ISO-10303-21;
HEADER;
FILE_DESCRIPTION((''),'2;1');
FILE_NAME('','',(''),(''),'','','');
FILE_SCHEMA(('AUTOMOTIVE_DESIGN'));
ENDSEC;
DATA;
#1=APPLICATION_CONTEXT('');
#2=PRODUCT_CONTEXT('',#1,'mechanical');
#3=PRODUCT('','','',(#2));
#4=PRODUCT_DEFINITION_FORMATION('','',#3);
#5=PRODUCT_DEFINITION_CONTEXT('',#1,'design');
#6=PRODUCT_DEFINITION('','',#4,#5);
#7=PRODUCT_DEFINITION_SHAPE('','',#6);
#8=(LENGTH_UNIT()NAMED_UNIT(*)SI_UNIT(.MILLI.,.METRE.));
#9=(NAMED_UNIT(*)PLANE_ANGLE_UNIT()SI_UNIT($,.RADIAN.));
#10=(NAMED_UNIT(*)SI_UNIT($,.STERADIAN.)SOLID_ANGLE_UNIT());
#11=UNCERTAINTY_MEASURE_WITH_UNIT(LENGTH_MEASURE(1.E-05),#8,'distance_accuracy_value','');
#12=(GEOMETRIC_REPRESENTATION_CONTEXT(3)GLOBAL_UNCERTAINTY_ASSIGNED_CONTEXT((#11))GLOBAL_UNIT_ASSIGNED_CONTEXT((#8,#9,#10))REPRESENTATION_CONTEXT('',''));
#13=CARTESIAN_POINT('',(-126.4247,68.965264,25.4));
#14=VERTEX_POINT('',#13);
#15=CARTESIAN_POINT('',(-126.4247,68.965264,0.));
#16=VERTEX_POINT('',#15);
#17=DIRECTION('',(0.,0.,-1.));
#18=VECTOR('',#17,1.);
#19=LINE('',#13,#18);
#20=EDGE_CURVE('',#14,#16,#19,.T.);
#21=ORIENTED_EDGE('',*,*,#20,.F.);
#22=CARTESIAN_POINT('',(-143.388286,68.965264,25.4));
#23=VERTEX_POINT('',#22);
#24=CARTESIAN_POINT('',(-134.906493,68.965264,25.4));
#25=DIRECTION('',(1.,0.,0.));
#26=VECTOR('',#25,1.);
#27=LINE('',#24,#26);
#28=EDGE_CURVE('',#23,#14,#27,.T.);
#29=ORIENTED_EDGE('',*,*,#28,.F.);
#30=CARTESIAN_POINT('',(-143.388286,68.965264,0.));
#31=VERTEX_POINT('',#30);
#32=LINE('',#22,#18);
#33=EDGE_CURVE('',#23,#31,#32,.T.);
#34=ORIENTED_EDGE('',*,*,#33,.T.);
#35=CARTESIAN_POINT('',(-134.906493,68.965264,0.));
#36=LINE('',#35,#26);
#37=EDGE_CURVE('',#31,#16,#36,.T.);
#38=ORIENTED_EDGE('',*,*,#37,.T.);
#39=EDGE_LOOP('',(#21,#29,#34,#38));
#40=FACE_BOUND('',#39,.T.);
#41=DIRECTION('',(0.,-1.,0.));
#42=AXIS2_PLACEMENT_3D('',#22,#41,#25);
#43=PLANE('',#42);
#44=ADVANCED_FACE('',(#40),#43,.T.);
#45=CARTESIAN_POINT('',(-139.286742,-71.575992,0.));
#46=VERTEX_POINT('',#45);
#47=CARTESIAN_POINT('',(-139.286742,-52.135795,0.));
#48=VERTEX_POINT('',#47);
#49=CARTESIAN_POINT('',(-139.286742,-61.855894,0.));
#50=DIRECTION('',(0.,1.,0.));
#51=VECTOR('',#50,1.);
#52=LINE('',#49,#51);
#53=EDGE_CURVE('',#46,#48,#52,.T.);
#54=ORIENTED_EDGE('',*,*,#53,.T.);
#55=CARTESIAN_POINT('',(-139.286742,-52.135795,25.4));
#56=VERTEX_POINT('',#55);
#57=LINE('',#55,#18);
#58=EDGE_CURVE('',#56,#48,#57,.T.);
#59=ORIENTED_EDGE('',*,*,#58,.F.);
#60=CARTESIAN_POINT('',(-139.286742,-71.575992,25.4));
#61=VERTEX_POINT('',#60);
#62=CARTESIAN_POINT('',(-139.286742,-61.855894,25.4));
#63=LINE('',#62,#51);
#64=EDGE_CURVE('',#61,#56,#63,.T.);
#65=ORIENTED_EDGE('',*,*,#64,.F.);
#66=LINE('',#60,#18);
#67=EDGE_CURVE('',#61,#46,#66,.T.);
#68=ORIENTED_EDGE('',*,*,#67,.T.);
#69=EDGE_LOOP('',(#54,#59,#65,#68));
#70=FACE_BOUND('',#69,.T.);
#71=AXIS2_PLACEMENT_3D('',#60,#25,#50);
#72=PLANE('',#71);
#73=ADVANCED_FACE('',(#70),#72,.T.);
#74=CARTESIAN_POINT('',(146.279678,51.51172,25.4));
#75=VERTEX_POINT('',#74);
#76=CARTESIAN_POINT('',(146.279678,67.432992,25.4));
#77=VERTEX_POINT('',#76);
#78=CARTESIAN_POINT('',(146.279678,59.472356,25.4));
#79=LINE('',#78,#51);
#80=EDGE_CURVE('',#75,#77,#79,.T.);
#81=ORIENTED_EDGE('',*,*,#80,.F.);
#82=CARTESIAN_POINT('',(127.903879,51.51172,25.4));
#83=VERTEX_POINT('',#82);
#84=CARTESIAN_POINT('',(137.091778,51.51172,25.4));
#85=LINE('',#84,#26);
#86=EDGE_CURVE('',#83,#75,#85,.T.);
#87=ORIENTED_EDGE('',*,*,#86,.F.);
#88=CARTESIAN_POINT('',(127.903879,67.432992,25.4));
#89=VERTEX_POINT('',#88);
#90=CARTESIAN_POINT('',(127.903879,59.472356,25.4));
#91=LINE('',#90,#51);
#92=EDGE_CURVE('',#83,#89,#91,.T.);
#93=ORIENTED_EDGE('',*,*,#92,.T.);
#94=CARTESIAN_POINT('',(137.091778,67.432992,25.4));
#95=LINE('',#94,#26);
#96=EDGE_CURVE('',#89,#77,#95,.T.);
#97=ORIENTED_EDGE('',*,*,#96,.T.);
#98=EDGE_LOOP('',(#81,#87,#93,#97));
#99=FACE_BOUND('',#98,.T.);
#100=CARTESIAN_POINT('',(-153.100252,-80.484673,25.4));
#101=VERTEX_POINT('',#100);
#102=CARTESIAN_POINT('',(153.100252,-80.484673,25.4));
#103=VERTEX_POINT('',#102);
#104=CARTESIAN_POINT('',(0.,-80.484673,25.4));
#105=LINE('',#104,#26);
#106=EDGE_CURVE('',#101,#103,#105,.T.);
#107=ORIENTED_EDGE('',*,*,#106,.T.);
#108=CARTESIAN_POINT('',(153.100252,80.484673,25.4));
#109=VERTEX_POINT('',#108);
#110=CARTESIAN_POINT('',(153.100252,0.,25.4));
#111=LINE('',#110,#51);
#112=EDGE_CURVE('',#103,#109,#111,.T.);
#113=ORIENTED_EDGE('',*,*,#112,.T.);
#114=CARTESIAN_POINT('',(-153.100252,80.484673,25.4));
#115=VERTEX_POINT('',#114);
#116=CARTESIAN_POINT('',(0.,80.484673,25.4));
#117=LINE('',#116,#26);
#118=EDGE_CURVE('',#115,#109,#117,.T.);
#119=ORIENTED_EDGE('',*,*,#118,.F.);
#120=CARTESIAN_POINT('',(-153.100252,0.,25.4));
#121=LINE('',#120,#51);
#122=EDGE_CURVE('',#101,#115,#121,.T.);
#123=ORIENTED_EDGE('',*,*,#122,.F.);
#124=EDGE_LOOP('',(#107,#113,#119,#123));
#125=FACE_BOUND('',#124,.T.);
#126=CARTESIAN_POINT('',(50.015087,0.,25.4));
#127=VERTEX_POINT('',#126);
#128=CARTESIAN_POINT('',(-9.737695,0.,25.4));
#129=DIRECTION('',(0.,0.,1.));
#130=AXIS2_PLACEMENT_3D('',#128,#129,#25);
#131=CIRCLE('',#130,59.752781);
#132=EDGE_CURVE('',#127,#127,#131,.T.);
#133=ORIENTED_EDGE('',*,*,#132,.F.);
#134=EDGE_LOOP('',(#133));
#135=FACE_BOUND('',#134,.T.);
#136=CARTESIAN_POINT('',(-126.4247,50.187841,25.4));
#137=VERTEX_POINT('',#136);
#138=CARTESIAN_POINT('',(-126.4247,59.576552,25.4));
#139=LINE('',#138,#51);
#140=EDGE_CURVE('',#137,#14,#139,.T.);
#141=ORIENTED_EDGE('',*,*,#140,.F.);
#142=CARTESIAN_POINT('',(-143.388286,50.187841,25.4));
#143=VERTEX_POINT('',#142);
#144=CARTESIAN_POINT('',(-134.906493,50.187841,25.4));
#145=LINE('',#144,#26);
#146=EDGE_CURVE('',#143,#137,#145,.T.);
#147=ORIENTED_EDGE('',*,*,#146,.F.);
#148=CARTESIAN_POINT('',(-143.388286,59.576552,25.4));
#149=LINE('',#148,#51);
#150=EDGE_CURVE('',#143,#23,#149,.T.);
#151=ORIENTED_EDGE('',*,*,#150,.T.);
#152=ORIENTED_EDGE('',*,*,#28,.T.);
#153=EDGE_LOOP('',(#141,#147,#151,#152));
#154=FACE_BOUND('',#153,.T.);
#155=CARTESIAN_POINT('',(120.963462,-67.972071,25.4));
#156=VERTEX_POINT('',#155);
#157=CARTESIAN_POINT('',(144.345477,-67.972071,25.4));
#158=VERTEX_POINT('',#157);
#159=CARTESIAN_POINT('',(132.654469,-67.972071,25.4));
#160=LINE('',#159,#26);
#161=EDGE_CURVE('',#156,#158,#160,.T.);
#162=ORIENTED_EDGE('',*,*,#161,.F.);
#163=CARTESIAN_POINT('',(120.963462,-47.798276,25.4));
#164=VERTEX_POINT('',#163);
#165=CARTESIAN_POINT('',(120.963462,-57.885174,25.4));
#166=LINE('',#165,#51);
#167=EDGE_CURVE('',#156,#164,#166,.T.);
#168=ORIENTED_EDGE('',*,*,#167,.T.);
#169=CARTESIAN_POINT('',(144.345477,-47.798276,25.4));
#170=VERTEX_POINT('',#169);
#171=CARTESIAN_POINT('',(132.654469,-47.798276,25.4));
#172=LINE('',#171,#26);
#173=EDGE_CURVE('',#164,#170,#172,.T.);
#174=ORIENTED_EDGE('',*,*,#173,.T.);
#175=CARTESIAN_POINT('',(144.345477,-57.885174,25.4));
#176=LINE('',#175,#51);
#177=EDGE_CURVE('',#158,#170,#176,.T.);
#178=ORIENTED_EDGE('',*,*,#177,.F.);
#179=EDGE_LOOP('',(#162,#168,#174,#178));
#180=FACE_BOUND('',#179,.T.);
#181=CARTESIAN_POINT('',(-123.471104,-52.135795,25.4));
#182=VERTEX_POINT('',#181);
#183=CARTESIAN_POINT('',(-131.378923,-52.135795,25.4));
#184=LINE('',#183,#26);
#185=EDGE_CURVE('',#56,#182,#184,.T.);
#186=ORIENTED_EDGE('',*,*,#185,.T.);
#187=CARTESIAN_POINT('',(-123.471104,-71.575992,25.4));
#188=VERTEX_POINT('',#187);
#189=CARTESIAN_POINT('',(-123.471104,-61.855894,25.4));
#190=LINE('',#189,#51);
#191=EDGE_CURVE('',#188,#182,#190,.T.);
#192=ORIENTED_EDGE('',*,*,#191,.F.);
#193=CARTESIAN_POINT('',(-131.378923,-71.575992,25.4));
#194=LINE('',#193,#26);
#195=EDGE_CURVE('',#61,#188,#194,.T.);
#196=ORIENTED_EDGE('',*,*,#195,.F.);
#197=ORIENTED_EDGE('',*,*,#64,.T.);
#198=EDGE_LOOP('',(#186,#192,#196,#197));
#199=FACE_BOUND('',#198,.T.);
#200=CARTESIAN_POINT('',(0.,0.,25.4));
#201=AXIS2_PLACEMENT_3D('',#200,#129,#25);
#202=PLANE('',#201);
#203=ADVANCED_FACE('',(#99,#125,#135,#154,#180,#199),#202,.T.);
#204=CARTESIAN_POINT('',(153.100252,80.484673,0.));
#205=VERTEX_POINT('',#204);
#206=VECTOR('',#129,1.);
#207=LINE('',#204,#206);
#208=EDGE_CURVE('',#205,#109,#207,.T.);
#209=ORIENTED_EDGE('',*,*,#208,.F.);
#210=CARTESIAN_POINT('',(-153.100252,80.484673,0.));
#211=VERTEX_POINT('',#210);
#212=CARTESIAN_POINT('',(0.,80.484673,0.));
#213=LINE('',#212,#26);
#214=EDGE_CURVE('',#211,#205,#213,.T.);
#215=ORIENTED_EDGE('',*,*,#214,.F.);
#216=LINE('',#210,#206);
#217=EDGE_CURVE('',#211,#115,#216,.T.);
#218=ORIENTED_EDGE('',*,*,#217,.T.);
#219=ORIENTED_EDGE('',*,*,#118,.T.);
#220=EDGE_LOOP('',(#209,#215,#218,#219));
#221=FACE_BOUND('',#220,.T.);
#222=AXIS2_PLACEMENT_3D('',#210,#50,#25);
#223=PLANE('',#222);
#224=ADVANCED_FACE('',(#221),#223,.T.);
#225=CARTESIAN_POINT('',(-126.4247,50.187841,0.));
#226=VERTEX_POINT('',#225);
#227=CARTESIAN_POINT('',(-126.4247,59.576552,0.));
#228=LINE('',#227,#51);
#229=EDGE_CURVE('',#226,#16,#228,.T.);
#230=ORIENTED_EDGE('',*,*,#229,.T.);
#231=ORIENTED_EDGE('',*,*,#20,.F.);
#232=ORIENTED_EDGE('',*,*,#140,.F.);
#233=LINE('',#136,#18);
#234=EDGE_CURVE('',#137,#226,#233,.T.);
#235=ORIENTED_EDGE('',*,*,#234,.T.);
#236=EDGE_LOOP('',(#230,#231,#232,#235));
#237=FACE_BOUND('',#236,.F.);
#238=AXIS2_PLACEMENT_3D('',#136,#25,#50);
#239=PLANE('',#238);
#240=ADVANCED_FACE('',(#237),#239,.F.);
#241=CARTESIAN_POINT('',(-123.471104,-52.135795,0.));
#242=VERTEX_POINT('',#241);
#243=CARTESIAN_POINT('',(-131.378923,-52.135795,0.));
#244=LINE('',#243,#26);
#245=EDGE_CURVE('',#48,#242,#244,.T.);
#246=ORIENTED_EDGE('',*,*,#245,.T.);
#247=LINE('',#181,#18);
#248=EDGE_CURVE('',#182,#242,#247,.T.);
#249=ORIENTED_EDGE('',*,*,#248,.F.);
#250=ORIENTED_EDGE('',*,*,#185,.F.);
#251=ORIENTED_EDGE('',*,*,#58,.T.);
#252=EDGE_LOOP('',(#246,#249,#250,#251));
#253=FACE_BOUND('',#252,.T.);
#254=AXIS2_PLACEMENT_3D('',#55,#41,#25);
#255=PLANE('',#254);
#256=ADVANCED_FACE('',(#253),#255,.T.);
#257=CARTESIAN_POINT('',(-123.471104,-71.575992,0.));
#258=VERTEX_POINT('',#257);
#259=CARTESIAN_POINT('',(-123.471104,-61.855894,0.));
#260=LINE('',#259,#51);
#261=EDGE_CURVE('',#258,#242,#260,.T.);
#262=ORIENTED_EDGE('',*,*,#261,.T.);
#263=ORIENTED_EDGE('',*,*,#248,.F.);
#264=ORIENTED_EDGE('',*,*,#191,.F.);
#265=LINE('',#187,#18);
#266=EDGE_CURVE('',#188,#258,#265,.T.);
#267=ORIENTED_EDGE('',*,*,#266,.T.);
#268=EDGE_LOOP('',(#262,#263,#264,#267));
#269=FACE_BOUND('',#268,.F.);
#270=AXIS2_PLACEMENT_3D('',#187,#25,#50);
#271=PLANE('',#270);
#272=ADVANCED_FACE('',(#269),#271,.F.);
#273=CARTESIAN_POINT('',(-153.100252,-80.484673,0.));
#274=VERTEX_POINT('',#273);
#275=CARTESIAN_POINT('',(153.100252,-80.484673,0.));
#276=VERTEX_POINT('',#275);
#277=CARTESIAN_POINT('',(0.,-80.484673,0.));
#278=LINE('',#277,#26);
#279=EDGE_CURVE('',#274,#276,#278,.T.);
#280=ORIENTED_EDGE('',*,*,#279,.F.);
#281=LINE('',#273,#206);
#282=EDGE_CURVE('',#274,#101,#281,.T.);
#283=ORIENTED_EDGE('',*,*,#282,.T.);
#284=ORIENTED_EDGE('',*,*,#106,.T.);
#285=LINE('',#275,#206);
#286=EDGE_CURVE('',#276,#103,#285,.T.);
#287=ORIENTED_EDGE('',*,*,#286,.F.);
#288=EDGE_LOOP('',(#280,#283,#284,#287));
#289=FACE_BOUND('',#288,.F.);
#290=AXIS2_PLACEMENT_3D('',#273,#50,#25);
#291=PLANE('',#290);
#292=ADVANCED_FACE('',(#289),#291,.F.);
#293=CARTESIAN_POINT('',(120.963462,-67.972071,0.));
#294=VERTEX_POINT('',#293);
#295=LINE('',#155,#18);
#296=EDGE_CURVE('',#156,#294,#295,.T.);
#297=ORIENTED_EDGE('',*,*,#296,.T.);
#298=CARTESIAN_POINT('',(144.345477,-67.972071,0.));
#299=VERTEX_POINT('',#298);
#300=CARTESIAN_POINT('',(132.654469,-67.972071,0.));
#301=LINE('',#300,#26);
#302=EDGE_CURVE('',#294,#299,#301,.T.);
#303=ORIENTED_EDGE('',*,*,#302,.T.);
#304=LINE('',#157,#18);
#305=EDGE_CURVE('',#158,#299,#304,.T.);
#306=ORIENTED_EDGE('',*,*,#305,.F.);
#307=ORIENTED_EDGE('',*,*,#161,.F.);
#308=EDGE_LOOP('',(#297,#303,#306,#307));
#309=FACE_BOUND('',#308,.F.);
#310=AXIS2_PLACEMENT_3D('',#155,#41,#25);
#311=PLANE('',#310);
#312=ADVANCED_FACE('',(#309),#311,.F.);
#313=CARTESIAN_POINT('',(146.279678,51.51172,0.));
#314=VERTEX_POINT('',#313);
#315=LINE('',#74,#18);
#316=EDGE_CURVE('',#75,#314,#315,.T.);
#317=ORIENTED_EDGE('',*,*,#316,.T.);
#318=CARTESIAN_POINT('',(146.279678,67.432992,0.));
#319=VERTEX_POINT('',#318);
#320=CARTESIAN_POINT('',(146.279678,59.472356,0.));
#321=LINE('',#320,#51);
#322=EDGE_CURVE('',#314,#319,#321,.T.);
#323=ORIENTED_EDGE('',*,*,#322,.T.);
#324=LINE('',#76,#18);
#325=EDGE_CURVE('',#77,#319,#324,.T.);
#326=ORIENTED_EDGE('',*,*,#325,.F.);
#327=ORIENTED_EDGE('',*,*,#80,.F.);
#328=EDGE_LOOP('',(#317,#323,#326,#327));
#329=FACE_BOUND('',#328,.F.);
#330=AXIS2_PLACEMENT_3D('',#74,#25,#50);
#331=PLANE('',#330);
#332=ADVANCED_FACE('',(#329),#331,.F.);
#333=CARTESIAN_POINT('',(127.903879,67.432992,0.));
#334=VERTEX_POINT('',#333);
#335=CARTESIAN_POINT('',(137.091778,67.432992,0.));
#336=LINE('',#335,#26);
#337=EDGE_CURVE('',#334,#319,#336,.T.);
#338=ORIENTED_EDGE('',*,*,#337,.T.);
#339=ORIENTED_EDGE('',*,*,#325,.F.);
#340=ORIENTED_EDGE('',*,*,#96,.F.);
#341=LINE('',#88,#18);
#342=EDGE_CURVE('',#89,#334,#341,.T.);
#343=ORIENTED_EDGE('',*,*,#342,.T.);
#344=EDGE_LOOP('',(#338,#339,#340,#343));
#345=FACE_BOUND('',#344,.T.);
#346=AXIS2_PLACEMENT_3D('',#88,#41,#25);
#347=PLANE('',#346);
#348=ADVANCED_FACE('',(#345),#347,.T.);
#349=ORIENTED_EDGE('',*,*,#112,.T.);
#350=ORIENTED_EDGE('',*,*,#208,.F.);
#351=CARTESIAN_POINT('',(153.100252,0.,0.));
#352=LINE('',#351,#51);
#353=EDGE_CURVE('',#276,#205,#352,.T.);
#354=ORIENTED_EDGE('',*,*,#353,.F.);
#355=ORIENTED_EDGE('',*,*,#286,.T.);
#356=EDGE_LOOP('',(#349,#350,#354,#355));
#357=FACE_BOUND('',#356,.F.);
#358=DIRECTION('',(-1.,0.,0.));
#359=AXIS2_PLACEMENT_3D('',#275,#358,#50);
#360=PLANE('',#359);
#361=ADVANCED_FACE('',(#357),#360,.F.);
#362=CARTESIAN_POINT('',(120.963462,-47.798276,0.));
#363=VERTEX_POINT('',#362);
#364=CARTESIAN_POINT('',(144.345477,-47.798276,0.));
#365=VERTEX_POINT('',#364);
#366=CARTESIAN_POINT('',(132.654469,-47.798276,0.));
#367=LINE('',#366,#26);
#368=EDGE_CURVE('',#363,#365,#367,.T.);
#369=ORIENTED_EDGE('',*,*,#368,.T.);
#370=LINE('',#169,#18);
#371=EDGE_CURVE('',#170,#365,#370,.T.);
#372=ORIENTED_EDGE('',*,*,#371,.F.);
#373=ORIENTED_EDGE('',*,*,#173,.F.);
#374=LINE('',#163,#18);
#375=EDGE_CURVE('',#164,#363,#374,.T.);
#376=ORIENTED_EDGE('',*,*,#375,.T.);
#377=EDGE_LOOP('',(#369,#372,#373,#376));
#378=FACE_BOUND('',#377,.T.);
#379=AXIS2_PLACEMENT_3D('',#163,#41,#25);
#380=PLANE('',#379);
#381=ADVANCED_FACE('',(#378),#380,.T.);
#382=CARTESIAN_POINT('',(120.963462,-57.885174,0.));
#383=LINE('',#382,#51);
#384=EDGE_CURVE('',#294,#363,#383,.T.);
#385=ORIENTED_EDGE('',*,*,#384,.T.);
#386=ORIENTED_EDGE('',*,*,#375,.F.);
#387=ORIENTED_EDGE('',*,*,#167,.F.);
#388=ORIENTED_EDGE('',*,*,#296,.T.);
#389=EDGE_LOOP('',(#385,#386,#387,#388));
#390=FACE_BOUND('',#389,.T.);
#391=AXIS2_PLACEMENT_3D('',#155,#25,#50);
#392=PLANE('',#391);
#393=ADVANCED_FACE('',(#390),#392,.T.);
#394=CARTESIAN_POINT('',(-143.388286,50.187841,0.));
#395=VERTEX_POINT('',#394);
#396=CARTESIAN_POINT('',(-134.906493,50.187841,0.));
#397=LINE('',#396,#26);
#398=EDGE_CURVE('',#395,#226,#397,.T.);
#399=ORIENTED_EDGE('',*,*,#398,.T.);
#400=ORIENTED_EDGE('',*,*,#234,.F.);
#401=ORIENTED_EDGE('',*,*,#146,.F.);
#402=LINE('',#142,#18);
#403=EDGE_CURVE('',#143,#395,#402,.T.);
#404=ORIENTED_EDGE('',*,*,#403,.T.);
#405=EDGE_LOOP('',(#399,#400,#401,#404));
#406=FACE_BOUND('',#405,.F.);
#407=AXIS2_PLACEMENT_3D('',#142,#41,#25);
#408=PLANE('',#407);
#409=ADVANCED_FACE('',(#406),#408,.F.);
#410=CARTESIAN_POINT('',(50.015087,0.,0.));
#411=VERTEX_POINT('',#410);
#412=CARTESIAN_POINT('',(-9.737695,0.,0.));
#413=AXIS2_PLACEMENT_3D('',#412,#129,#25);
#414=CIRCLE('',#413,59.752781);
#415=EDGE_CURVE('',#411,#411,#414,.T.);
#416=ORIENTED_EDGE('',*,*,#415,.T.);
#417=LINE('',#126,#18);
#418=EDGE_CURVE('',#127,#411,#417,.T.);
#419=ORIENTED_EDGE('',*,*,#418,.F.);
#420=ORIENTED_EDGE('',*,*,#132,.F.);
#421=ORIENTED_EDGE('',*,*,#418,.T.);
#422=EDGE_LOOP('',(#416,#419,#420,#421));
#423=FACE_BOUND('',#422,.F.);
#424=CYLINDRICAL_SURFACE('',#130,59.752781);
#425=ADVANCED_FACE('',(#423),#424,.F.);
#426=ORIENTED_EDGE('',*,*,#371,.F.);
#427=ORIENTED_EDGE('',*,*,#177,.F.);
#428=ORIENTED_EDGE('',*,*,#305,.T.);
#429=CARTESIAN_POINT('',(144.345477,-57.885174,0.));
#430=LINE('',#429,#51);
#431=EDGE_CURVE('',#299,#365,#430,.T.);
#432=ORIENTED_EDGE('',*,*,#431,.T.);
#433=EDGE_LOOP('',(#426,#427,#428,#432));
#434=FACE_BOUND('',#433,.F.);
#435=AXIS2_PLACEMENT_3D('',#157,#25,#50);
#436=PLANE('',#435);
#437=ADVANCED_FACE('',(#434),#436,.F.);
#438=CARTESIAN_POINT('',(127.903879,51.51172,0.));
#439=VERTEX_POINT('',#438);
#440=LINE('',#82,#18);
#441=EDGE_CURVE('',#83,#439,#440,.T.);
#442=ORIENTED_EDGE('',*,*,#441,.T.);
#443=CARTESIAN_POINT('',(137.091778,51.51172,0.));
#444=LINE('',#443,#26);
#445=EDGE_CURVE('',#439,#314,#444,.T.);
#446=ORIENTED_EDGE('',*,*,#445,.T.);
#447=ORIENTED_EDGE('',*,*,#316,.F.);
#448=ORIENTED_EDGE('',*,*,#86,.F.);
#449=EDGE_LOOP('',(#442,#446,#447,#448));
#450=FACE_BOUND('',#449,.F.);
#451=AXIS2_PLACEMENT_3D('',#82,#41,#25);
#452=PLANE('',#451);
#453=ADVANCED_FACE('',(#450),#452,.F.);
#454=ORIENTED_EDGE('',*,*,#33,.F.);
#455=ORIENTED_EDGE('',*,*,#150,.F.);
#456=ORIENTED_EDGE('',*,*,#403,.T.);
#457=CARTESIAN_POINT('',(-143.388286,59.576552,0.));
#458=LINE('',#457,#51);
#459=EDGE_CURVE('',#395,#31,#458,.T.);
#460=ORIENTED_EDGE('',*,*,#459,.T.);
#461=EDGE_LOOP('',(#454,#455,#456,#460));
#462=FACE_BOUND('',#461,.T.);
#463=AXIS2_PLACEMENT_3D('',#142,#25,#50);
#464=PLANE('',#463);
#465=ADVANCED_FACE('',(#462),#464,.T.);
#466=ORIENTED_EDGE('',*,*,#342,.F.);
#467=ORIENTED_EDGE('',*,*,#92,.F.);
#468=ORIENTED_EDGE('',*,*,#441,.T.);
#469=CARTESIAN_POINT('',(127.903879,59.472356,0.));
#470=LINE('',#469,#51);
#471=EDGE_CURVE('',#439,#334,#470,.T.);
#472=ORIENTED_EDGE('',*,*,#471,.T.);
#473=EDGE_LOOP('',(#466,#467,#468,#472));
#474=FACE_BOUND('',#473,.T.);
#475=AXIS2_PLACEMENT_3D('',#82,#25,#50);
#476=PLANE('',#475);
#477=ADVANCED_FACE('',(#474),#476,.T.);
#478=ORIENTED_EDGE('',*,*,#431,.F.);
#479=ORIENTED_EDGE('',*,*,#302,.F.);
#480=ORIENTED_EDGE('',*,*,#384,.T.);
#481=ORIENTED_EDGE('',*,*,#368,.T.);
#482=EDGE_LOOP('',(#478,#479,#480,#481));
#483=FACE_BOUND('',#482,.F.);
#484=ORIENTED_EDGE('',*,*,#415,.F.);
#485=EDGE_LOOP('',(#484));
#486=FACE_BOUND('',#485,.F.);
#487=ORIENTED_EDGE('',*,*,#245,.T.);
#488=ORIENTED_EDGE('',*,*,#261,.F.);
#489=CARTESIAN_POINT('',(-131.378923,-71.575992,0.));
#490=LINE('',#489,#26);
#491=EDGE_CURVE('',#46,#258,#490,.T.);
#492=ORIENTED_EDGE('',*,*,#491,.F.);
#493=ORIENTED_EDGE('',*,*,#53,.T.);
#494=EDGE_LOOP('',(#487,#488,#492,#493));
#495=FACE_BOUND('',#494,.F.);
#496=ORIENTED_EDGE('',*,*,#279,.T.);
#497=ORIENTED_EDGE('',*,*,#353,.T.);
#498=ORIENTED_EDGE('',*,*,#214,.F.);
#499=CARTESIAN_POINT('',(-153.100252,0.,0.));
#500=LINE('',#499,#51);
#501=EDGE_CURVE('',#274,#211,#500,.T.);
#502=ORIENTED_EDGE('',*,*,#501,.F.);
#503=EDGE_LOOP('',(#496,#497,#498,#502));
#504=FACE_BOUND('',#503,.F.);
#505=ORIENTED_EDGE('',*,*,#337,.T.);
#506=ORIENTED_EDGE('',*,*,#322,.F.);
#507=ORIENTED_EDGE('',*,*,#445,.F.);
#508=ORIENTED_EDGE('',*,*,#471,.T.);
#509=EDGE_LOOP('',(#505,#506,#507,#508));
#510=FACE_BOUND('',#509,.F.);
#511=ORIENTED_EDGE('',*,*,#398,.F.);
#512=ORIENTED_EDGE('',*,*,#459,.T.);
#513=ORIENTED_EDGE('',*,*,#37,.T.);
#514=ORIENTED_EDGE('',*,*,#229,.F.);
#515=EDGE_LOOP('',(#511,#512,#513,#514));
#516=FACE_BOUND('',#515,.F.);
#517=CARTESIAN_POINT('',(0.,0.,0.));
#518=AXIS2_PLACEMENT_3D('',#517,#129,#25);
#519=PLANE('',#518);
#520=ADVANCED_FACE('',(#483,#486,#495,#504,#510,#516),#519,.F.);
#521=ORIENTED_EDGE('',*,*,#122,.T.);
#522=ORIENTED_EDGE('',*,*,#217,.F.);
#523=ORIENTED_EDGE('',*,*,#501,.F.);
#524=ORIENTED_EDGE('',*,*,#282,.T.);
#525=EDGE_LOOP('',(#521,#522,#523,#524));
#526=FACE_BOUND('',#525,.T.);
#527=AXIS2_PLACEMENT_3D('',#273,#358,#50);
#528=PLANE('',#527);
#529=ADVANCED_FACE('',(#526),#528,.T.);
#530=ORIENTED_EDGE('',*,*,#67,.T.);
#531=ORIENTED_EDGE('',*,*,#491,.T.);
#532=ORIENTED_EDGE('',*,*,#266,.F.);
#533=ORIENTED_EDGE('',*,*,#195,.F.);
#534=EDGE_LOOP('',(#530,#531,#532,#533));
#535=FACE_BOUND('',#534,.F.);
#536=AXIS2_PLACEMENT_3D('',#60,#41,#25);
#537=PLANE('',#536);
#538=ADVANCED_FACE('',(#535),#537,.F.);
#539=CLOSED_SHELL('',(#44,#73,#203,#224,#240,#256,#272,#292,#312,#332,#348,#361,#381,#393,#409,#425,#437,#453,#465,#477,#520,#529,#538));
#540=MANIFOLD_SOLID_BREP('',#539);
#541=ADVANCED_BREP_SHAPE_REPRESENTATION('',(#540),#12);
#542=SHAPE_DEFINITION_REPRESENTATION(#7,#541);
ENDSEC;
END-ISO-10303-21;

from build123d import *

# Parameters (mm, degrees)
F0_W      = 306.200504303
F0_H      = 160.9693467617
F1_DEPTH  = 25.4
F2_W      = 16.9635862112
F2_H      = 18.7774226069
F2_W_2    = 18.3757990599
F2_H_2    = 15.9212723374
F2_W_3    = 15.8156380057
F2_H_3    = 19.4401964545
F3_DEPTH  = 25.4
F4_W      = 23.3820155263
F4_H      = 20.1737955213
F5_DEPTH  = 25.4
F10_W     = 156.8522006273
F10_H     = 128.1716823578
F10_W_2   = 155.7295322418
F10_H_2   = 9.3674659729
F11_DEPTH = 25.4
F12_R     = 59.7527814568
F13_DEPTH = 25.4


# Not quite as in the source:
# - a feature of the source that left no trace in its solid (it failed there, or was rolled back) is left out


with BuildPart() as f1:
    # F0 (on Top) → F1 (new body)
    with BuildSketch(Plane.XY):
        Rectangle(F0_W, F0_H)
    extrude(amount=F1_DEPTH)

    # F2 (on face) → F3 (cut)
    with BuildSketch(Plane.XY.offset(25.4)):
        with Locations((-134.9064931273, 59.5765523612)):
            Rectangle(F2_W, F2_H)
        with Locations((137.0917782187, 59.4723559916)):
            Rectangle(F2_W_2, F2_H_2)
        with Locations((-131.3789226115, -61.8558935821)):
            Rectangle(F2_W_3, F2_H_3)
    extrude(amount=-F3_DEPTH, mode=Mode.SUBTRACT)

    # F4 (on face) → F5 (cut)
    with BuildSketch(Plane.XY.offset(25.4)):
        with Locations((132.6544694602, -57.8851737082)):
            Rectangle(F4_W, F4_H)
    extrude(amount=-F5_DEPTH, mode=Mode.SUBTRACT)

    # F10 (on Right) → F11 (cut)
    with BuildSketch(Plane.YZ):
        with Locations((274.1180285811, -160.389393568)):
            Rectangle(F10_W, F10_H)
        with Locations((-275.496006012, 285.2313816547)):
            Rectangle(F10_W_2, F10_H_2)
    extrude(amount=-F11_DEPTH, mode=Mode.SUBTRACT)

    # F12 (on face) → F13 (cut)
    with BuildSketch(Plane.XY.offset(25.4)):
        with Locations((-9.737694636, 0)):
            Circle(F12_R)
    extrude(amount=-F13_DEPTH, mode=Mode.SUBTRACT)


solid = f1.part
